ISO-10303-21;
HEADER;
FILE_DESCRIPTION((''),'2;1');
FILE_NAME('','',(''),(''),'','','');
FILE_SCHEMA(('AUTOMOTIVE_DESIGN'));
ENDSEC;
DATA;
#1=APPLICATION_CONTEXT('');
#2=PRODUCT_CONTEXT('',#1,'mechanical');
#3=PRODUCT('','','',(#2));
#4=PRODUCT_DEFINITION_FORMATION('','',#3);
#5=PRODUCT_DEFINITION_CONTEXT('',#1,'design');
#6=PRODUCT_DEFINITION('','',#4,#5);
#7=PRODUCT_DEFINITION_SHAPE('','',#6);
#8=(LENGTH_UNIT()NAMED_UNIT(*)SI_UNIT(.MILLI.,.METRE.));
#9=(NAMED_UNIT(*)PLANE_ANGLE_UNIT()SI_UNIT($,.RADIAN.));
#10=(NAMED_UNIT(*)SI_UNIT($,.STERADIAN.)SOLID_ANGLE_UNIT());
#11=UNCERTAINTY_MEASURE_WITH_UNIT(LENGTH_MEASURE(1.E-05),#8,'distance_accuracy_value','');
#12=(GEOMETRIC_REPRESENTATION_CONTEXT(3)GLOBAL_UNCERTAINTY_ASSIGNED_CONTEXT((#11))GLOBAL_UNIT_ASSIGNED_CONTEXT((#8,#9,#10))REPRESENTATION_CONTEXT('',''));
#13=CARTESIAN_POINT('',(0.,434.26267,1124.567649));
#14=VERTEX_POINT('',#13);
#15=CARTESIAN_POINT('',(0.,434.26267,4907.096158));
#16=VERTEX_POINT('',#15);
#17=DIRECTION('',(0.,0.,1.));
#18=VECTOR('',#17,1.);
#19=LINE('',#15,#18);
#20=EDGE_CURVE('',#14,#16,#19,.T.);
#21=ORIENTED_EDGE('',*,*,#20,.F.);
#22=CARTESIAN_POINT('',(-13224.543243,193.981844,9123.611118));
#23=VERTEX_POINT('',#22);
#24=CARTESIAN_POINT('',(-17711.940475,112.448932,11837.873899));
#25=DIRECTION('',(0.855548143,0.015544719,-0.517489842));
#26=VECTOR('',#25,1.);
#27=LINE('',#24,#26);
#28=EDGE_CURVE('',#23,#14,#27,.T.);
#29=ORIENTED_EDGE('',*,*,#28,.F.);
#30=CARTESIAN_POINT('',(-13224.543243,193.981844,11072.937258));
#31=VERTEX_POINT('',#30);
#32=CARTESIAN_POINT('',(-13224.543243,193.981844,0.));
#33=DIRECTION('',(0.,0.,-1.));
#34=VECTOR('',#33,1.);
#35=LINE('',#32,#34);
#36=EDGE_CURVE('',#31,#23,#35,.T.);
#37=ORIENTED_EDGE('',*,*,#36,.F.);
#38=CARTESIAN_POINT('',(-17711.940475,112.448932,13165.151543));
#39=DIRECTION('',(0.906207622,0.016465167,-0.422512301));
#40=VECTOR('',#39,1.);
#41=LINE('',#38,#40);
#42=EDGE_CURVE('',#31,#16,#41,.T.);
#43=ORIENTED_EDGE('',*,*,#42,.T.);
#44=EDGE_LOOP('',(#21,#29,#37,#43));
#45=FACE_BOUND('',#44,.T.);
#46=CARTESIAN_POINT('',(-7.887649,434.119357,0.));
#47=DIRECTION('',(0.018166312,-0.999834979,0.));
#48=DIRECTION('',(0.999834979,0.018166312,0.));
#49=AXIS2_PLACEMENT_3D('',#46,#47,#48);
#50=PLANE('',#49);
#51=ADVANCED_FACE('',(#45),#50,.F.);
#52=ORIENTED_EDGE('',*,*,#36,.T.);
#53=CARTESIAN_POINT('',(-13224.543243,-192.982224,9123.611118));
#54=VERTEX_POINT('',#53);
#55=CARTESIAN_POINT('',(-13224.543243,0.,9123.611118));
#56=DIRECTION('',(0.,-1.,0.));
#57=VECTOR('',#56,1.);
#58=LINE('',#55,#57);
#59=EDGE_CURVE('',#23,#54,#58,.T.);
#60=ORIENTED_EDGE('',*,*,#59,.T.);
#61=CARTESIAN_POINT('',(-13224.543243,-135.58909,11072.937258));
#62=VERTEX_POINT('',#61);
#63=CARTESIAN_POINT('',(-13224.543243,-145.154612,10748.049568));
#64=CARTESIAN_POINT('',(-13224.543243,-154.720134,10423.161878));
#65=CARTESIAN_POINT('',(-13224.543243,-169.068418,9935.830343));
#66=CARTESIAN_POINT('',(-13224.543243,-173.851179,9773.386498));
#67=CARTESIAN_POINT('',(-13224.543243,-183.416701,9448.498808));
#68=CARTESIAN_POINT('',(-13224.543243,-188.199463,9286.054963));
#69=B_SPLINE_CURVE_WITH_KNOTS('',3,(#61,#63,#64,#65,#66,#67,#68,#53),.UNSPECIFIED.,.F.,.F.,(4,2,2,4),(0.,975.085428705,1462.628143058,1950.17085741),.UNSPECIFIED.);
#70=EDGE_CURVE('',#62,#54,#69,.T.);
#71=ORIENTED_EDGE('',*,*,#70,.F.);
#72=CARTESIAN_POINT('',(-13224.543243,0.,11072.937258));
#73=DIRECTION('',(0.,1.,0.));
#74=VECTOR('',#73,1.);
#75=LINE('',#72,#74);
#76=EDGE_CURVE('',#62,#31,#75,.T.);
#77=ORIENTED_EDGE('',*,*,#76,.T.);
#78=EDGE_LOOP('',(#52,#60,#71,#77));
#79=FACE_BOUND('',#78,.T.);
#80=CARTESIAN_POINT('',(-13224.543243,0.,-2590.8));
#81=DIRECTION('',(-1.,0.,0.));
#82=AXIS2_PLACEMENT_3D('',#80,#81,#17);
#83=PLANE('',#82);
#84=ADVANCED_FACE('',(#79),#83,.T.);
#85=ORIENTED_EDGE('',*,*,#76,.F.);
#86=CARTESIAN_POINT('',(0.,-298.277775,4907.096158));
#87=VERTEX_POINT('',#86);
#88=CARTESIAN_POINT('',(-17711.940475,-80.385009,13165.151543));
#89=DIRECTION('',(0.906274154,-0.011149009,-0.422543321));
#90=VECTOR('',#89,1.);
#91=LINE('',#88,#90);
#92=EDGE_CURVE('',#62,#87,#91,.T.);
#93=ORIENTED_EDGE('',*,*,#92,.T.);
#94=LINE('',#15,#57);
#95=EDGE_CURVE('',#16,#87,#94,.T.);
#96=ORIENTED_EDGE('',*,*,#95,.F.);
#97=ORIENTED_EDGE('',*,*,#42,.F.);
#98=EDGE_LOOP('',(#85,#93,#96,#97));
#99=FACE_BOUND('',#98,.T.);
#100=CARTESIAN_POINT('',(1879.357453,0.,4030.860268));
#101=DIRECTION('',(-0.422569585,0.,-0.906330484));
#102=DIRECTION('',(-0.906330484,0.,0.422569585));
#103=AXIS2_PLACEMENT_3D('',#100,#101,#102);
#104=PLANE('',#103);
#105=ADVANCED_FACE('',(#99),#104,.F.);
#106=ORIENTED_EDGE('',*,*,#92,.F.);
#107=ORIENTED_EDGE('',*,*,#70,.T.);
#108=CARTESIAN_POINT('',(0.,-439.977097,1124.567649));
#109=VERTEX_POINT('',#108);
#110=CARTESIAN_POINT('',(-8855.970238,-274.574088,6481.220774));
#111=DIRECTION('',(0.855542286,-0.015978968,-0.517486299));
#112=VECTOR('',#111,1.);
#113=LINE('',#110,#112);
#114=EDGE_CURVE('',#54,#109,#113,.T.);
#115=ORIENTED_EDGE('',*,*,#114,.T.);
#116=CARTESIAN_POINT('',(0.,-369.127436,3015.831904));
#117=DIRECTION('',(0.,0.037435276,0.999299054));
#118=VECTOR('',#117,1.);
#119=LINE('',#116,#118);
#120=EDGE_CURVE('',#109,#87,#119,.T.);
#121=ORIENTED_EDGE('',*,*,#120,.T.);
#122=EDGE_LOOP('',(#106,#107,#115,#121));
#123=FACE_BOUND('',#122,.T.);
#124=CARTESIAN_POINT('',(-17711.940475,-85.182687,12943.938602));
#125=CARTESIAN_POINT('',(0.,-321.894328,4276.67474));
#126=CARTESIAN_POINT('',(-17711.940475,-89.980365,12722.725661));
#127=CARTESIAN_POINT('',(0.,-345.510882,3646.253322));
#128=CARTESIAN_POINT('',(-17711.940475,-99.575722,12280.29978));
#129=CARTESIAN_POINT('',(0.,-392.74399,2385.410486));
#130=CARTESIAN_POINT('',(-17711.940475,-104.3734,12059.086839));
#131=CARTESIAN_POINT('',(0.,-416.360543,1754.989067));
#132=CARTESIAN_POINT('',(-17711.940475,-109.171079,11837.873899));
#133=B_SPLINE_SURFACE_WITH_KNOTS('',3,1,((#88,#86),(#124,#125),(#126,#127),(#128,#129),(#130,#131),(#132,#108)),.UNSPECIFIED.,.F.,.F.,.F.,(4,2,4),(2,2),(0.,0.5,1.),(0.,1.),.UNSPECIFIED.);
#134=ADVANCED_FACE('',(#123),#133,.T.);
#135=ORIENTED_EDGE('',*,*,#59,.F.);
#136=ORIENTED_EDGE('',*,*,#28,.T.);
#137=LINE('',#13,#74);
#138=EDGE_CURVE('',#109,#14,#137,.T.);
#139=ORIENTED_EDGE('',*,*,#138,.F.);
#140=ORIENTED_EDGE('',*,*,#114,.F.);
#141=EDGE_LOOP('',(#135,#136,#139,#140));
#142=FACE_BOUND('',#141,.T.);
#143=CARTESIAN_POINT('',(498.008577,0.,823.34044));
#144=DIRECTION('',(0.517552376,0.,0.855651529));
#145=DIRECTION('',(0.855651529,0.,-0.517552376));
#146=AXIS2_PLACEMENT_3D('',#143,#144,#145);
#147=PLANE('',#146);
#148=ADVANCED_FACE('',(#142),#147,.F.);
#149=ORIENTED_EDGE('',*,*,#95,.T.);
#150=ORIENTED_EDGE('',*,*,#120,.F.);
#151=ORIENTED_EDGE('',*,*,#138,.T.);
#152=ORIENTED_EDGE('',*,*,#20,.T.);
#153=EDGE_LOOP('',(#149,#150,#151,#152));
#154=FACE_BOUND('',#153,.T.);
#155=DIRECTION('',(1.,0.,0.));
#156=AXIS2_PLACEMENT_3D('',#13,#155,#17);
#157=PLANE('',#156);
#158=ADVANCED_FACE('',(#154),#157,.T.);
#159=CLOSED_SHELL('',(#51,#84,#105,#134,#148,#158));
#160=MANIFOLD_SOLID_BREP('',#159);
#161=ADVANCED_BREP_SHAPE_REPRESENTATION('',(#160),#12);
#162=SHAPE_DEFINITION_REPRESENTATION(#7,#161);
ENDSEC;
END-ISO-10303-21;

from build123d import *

# Parameters (mm, degrees)
SKETCH4_W          = 14986.678438392
SKETCH4_H          = 7706.357590778
CUT_EXTRUDE1_DEPTH = 5181.6


with BuildPart() as part:
    # Surface-Knit3: read off the stored shape, not the designer's step
    # Surface-Knit3: loft between two sections, ruled curve by curve
    surface_knit3_from = [
        Edge.make_bspline([(-17711.940475464, -80.385008706, 13165.151542886), (-17711.940475464, -85.182687055, 12943.938602187), (-17711.940475464, -89.980365404, 12722.725661487), (-17711.940475464, -99.575722103, 12280.299780089), (-17711.940475464, -104.373400452, 12059.086839389), (-17711.940475464, -109.171078801, 11837.87389869)], [0, 0, 0, 0, 0.5, 0.5, 1, 1, 1, 1], 3),
        Edge.make_line((-17711.940475464, -80.385008706, 13165.151542886), (-17711.940475464, 112.448931944, 13165.151542886)),
        Edge.make_line((-17711.940475464, 112.448931944, 11837.87389869), (-17711.940475464, -109.171078801, 11837.87389869)),
        Edge.make_line((-17711.940475464, 112.448931944, 13165.151542886), (-17711.940475464, 112.448931944, 11837.87389869)),
    ]
    surface_knit3_to = [
        Edge.make_bspline([(0, -298.277774529, 4907.09615841), (0, -321.894328297, 4276.674740223), (0, -345.510882066, 3646.253322036), (0, -392.743989603, 2385.410485661), (0, -416.360543372, 1754.989067474), (0, -439.977097141, 1124.567649286)], [0, 0, 0, 0, 0.5, 0.5, 1, 1, 1, 1], 3),
        Edge.make_line((0, -298.277774529, 4907.09615841), (0, 434.262669848, 4907.09615841)),
        Edge.make_line((0, 434.262669848, 1124.567649286), (0, -439.977097141, 1124.567649286)),
        Edge.make_line((0, 434.262669848, 4907.09615841), (0, 434.262669848, 1124.567649286)),
    ]
    surface_knit3 = Solid(Shell([*[Face.make_surface_from_curves(surface_knit3_from[k], surface_knit3_to[k]) for k in range(4)], Face(Wire(surface_knit3_from)), Face(Wire(surface_knit3_to))]))
    add(surface_knit3)

    # Sketch4 → Cut-Extrude1 (cut, along a direction that is not the sketch's normal)
    with BuildSketch(Plane.ZY.offset(17711.940475464)):
        with Locations((12517.353947819, -161.456903525)):
            Rectangle(SKETCH4_W, SKETCH4_H)
    extrude(amount=-CUT_EXTRUDE1_DEPTH, dir=(-0.8660254037844378, 0, 0.5000000000000014), mode=Mode.SUBTRACT)


solid = part.part
